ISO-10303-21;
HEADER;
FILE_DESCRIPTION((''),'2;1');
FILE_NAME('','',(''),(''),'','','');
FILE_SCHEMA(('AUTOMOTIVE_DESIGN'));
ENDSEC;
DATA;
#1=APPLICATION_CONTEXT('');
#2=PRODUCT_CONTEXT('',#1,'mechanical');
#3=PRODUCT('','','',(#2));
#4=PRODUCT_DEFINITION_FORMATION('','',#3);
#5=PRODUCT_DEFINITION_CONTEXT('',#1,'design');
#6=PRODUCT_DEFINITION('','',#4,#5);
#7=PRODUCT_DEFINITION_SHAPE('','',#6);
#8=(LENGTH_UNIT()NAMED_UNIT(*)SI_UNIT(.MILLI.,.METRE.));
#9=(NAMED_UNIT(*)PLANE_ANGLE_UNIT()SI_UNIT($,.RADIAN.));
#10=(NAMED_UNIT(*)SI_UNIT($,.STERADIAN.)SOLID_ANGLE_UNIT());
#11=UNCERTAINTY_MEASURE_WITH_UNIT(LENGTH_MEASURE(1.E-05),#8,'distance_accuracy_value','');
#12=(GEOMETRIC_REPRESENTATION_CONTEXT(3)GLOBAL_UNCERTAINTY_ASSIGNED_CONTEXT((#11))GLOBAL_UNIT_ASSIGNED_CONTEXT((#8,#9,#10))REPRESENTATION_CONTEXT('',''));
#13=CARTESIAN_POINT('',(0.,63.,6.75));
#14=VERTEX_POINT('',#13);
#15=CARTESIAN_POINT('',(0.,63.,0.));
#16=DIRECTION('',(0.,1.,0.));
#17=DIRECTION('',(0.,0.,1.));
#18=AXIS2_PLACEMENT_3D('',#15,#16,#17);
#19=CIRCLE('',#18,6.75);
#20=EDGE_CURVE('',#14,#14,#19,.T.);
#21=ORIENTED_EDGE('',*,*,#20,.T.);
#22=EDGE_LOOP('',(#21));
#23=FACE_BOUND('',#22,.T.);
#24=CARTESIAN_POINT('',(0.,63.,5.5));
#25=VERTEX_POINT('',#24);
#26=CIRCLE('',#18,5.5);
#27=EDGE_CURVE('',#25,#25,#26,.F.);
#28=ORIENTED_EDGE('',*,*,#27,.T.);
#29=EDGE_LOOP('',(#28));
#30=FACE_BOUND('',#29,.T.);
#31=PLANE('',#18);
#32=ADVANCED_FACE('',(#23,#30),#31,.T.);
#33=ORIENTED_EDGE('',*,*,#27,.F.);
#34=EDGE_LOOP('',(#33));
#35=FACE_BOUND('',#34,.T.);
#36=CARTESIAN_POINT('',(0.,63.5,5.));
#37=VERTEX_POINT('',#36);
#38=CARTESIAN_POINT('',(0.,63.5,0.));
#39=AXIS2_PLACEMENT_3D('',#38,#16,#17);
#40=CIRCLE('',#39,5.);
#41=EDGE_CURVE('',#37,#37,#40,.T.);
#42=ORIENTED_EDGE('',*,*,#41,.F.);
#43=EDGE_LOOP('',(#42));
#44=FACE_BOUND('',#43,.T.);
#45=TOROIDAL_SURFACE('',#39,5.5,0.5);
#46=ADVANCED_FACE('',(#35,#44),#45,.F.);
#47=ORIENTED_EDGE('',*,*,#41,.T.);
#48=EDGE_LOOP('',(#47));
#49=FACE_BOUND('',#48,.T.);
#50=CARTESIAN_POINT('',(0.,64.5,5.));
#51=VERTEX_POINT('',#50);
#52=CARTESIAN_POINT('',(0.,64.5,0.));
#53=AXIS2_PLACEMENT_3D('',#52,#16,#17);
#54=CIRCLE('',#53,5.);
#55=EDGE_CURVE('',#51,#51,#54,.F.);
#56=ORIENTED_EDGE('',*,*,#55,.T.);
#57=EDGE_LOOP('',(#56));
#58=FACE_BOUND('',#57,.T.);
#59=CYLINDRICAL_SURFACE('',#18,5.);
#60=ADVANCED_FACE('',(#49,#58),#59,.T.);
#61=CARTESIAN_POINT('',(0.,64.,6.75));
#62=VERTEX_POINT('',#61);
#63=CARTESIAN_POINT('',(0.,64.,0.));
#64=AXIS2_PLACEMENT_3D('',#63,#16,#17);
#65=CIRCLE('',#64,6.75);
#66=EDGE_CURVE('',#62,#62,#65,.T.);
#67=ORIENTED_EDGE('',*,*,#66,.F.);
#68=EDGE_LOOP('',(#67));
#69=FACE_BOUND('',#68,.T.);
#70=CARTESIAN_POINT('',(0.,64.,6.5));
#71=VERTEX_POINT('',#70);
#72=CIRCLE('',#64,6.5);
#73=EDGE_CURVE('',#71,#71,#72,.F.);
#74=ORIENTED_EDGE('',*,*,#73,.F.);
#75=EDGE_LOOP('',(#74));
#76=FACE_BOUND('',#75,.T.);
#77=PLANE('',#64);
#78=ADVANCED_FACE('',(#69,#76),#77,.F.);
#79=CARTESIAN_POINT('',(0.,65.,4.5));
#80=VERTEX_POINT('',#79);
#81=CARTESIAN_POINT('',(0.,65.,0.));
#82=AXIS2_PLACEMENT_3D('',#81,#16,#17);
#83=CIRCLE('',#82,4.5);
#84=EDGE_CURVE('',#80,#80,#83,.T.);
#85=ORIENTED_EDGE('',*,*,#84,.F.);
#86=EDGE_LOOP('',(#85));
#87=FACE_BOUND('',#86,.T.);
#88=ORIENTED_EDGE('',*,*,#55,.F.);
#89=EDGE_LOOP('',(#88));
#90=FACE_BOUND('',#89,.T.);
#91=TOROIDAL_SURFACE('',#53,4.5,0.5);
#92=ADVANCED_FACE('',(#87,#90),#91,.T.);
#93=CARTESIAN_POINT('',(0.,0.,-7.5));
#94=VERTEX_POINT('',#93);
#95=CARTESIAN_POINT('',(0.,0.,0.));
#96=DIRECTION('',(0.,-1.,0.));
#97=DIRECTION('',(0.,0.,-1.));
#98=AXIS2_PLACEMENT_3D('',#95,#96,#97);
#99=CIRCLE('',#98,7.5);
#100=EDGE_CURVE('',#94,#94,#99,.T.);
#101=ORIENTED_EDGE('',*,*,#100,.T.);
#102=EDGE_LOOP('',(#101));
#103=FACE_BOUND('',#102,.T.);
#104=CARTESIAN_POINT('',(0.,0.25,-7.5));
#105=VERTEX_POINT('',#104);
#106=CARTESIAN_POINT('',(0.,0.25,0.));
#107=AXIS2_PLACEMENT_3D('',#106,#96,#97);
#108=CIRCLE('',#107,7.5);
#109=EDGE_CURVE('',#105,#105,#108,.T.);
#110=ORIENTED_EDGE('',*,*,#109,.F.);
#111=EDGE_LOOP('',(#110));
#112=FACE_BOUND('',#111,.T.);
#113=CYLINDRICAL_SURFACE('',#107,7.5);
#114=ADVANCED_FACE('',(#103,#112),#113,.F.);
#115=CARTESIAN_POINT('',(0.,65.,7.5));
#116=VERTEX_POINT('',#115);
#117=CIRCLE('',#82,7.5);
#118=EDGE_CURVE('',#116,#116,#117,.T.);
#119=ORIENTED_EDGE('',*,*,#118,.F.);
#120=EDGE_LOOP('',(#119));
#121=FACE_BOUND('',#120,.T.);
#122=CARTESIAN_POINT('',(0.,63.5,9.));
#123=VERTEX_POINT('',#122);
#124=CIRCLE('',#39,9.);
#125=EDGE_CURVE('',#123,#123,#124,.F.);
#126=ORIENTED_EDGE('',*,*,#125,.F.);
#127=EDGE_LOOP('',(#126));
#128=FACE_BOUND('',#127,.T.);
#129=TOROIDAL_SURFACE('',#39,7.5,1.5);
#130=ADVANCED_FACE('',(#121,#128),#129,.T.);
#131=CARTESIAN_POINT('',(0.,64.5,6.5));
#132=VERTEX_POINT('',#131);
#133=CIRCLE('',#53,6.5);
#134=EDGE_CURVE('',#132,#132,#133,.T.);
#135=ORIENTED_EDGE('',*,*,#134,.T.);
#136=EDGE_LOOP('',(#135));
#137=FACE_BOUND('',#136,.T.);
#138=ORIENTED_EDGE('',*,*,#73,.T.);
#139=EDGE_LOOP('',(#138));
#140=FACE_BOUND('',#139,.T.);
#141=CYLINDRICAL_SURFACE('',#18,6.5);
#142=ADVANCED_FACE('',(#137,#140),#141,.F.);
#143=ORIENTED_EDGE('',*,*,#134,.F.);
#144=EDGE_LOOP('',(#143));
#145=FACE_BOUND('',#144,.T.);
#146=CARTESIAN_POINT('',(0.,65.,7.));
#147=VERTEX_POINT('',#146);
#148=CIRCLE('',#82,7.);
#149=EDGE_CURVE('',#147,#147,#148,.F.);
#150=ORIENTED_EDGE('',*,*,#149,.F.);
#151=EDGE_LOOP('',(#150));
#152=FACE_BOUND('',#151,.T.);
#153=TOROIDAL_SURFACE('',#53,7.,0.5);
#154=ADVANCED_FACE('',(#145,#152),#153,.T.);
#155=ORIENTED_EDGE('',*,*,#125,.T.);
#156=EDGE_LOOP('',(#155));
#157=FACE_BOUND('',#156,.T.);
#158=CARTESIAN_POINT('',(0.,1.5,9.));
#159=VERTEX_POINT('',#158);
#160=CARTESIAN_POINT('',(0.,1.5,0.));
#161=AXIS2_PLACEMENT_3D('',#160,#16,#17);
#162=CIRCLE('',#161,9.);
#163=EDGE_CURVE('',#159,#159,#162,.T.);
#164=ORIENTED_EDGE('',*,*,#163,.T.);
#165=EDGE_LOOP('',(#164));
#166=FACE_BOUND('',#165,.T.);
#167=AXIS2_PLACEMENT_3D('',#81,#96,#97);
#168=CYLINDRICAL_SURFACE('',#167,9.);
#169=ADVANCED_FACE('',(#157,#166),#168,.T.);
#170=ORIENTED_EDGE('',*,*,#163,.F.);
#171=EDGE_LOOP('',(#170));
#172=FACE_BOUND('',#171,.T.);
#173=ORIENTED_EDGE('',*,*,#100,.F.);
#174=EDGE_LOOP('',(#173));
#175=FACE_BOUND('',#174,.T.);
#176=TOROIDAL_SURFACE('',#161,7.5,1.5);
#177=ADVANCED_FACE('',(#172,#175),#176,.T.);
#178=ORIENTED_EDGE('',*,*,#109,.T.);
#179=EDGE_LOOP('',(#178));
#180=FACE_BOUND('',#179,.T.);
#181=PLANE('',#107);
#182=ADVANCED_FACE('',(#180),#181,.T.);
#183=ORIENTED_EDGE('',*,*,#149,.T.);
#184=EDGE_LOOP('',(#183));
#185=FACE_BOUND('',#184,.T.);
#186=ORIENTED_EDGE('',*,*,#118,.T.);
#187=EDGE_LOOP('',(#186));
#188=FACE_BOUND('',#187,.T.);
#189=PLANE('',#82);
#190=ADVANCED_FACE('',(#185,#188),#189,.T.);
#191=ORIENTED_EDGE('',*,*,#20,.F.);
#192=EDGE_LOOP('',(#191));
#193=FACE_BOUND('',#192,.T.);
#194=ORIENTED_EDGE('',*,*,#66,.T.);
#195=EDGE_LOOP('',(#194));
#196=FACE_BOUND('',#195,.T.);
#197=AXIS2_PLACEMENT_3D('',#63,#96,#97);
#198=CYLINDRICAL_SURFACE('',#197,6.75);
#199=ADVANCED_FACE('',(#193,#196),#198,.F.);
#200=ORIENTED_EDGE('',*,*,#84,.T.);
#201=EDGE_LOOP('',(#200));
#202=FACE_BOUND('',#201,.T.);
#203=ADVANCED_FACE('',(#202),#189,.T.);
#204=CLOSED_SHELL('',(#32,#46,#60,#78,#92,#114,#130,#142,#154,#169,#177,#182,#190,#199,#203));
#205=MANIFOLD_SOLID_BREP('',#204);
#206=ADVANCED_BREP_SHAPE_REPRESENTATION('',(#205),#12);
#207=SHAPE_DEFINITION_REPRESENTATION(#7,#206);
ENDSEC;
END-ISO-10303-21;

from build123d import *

# Parameters (mm, degrees)
SKETCH_1_R          = 9
EXTRUDE_1_DEPTH     = 65
SKETCH_2_R          = 6.5
SKETCH_2_R_2        = 5
CUT_EXTRUDE_1_DEPTH = 2
SKETCH_3_R          = 7.5
CUT_EXTRUDE_2_DEPTH = 0.25
CUT_EXTRUDE_START   = 1
SKETCH_4_R          = 6.75
SKETCH_4_R_2        = 5
CUT_EXTRUDE_3_DEPTH = 1
FILLET_1_R          = 1.5
FILLET_2_R          = 0.5
FILLET_3_R          = 0.5


with BuildPart() as part:
    # 草图1 → 凸台-拉伸1 (new body)
    with BuildSketch(Plane(origin=(0, 0, 0), x_dir=(1, 0, 0), z_dir=(0, 1, 0))):
        with Locations(Location((0, 0, 0), (0, 0, 270))):
            Circle(SKETCH_1_R)
    extrude(amount=EXTRUDE_1_DEPTH)

    # 草图2 → 切除-拉伸1 (cut)
    with BuildSketch(Plane(origin=(0, 65, 0), x_dir=(1, 0, 0), z_dir=(0, 1, 0))):
        with Locations(Location((0, 0, 0), (0, 0, 270))):
            Circle(SKETCH_2_R)
        with Locations(Location((0, 0, 0), (0, 0, 270))):
            Circle(SKETCH_2_R_2, mode=Mode.SUBTRACT)
    extrude(amount=-CUT_EXTRUDE_1_DEPTH, mode=Mode.SUBTRACT)

    # 草图3 → 切除-拉伸2 (cut)
    with BuildSketch(Plane(origin=(0, 0, 0), x_dir=(-1, 0, 0), z_dir=(0, -1, 0))):
        with Locations(Location((0, 0, 0), (0, 0, 90))):
            Circle(SKETCH_3_R)
    extrude(amount=-CUT_EXTRUDE_2_DEPTH, mode=Mode.SUBTRACT)

    # 草图4 → 切除-拉伸3 (cut)
    with BuildSketch(Plane(origin=(0, 63, 0), x_dir=(1, 0, 0), z_dir=(0, 1, 0)).offset(CUT_EXTRUDE_START)):
        with Locations(Location((0, 0, 0), (0, 0, 270))):
            Circle(SKETCH_4_R)
        with Locations(Location((0, 0, 0), (0, 0, 270))):
            Circle(SKETCH_4_R_2, mode=Mode.SUBTRACT)
    extrude(amount=-CUT_EXTRUDE_3_DEPTH, mode=Mode.SUBTRACT)

    # 圆角1
    fillet_1_edges = [part.edges().sort_by_distance(p)[0] for p in [
        (0, 0, -9),
        (0, 65, -9),
    ]]
    fillet(fillet_1_edges, radius=FILLET_1_R - 0.0001)  # a hair under: the kernel refuses the full size

    # 圆角2
    fillet_2_edges = [part.edges().sort_by_distance(p)[0] for p in [
        (0, 65, -6.5),
    ]]
    fillet(fillet_2_edges, radius=FILLET_2_R)

    # 圆角3
    fillet_3_edges = [part.edges().sort_by_distance(p)[0] for p in [
        (0, 63, -5),
        (0, 65, -5),
    ]]
    fillet(fillet_3_edges, radius=FILLET_3_R)


solid = part.part
